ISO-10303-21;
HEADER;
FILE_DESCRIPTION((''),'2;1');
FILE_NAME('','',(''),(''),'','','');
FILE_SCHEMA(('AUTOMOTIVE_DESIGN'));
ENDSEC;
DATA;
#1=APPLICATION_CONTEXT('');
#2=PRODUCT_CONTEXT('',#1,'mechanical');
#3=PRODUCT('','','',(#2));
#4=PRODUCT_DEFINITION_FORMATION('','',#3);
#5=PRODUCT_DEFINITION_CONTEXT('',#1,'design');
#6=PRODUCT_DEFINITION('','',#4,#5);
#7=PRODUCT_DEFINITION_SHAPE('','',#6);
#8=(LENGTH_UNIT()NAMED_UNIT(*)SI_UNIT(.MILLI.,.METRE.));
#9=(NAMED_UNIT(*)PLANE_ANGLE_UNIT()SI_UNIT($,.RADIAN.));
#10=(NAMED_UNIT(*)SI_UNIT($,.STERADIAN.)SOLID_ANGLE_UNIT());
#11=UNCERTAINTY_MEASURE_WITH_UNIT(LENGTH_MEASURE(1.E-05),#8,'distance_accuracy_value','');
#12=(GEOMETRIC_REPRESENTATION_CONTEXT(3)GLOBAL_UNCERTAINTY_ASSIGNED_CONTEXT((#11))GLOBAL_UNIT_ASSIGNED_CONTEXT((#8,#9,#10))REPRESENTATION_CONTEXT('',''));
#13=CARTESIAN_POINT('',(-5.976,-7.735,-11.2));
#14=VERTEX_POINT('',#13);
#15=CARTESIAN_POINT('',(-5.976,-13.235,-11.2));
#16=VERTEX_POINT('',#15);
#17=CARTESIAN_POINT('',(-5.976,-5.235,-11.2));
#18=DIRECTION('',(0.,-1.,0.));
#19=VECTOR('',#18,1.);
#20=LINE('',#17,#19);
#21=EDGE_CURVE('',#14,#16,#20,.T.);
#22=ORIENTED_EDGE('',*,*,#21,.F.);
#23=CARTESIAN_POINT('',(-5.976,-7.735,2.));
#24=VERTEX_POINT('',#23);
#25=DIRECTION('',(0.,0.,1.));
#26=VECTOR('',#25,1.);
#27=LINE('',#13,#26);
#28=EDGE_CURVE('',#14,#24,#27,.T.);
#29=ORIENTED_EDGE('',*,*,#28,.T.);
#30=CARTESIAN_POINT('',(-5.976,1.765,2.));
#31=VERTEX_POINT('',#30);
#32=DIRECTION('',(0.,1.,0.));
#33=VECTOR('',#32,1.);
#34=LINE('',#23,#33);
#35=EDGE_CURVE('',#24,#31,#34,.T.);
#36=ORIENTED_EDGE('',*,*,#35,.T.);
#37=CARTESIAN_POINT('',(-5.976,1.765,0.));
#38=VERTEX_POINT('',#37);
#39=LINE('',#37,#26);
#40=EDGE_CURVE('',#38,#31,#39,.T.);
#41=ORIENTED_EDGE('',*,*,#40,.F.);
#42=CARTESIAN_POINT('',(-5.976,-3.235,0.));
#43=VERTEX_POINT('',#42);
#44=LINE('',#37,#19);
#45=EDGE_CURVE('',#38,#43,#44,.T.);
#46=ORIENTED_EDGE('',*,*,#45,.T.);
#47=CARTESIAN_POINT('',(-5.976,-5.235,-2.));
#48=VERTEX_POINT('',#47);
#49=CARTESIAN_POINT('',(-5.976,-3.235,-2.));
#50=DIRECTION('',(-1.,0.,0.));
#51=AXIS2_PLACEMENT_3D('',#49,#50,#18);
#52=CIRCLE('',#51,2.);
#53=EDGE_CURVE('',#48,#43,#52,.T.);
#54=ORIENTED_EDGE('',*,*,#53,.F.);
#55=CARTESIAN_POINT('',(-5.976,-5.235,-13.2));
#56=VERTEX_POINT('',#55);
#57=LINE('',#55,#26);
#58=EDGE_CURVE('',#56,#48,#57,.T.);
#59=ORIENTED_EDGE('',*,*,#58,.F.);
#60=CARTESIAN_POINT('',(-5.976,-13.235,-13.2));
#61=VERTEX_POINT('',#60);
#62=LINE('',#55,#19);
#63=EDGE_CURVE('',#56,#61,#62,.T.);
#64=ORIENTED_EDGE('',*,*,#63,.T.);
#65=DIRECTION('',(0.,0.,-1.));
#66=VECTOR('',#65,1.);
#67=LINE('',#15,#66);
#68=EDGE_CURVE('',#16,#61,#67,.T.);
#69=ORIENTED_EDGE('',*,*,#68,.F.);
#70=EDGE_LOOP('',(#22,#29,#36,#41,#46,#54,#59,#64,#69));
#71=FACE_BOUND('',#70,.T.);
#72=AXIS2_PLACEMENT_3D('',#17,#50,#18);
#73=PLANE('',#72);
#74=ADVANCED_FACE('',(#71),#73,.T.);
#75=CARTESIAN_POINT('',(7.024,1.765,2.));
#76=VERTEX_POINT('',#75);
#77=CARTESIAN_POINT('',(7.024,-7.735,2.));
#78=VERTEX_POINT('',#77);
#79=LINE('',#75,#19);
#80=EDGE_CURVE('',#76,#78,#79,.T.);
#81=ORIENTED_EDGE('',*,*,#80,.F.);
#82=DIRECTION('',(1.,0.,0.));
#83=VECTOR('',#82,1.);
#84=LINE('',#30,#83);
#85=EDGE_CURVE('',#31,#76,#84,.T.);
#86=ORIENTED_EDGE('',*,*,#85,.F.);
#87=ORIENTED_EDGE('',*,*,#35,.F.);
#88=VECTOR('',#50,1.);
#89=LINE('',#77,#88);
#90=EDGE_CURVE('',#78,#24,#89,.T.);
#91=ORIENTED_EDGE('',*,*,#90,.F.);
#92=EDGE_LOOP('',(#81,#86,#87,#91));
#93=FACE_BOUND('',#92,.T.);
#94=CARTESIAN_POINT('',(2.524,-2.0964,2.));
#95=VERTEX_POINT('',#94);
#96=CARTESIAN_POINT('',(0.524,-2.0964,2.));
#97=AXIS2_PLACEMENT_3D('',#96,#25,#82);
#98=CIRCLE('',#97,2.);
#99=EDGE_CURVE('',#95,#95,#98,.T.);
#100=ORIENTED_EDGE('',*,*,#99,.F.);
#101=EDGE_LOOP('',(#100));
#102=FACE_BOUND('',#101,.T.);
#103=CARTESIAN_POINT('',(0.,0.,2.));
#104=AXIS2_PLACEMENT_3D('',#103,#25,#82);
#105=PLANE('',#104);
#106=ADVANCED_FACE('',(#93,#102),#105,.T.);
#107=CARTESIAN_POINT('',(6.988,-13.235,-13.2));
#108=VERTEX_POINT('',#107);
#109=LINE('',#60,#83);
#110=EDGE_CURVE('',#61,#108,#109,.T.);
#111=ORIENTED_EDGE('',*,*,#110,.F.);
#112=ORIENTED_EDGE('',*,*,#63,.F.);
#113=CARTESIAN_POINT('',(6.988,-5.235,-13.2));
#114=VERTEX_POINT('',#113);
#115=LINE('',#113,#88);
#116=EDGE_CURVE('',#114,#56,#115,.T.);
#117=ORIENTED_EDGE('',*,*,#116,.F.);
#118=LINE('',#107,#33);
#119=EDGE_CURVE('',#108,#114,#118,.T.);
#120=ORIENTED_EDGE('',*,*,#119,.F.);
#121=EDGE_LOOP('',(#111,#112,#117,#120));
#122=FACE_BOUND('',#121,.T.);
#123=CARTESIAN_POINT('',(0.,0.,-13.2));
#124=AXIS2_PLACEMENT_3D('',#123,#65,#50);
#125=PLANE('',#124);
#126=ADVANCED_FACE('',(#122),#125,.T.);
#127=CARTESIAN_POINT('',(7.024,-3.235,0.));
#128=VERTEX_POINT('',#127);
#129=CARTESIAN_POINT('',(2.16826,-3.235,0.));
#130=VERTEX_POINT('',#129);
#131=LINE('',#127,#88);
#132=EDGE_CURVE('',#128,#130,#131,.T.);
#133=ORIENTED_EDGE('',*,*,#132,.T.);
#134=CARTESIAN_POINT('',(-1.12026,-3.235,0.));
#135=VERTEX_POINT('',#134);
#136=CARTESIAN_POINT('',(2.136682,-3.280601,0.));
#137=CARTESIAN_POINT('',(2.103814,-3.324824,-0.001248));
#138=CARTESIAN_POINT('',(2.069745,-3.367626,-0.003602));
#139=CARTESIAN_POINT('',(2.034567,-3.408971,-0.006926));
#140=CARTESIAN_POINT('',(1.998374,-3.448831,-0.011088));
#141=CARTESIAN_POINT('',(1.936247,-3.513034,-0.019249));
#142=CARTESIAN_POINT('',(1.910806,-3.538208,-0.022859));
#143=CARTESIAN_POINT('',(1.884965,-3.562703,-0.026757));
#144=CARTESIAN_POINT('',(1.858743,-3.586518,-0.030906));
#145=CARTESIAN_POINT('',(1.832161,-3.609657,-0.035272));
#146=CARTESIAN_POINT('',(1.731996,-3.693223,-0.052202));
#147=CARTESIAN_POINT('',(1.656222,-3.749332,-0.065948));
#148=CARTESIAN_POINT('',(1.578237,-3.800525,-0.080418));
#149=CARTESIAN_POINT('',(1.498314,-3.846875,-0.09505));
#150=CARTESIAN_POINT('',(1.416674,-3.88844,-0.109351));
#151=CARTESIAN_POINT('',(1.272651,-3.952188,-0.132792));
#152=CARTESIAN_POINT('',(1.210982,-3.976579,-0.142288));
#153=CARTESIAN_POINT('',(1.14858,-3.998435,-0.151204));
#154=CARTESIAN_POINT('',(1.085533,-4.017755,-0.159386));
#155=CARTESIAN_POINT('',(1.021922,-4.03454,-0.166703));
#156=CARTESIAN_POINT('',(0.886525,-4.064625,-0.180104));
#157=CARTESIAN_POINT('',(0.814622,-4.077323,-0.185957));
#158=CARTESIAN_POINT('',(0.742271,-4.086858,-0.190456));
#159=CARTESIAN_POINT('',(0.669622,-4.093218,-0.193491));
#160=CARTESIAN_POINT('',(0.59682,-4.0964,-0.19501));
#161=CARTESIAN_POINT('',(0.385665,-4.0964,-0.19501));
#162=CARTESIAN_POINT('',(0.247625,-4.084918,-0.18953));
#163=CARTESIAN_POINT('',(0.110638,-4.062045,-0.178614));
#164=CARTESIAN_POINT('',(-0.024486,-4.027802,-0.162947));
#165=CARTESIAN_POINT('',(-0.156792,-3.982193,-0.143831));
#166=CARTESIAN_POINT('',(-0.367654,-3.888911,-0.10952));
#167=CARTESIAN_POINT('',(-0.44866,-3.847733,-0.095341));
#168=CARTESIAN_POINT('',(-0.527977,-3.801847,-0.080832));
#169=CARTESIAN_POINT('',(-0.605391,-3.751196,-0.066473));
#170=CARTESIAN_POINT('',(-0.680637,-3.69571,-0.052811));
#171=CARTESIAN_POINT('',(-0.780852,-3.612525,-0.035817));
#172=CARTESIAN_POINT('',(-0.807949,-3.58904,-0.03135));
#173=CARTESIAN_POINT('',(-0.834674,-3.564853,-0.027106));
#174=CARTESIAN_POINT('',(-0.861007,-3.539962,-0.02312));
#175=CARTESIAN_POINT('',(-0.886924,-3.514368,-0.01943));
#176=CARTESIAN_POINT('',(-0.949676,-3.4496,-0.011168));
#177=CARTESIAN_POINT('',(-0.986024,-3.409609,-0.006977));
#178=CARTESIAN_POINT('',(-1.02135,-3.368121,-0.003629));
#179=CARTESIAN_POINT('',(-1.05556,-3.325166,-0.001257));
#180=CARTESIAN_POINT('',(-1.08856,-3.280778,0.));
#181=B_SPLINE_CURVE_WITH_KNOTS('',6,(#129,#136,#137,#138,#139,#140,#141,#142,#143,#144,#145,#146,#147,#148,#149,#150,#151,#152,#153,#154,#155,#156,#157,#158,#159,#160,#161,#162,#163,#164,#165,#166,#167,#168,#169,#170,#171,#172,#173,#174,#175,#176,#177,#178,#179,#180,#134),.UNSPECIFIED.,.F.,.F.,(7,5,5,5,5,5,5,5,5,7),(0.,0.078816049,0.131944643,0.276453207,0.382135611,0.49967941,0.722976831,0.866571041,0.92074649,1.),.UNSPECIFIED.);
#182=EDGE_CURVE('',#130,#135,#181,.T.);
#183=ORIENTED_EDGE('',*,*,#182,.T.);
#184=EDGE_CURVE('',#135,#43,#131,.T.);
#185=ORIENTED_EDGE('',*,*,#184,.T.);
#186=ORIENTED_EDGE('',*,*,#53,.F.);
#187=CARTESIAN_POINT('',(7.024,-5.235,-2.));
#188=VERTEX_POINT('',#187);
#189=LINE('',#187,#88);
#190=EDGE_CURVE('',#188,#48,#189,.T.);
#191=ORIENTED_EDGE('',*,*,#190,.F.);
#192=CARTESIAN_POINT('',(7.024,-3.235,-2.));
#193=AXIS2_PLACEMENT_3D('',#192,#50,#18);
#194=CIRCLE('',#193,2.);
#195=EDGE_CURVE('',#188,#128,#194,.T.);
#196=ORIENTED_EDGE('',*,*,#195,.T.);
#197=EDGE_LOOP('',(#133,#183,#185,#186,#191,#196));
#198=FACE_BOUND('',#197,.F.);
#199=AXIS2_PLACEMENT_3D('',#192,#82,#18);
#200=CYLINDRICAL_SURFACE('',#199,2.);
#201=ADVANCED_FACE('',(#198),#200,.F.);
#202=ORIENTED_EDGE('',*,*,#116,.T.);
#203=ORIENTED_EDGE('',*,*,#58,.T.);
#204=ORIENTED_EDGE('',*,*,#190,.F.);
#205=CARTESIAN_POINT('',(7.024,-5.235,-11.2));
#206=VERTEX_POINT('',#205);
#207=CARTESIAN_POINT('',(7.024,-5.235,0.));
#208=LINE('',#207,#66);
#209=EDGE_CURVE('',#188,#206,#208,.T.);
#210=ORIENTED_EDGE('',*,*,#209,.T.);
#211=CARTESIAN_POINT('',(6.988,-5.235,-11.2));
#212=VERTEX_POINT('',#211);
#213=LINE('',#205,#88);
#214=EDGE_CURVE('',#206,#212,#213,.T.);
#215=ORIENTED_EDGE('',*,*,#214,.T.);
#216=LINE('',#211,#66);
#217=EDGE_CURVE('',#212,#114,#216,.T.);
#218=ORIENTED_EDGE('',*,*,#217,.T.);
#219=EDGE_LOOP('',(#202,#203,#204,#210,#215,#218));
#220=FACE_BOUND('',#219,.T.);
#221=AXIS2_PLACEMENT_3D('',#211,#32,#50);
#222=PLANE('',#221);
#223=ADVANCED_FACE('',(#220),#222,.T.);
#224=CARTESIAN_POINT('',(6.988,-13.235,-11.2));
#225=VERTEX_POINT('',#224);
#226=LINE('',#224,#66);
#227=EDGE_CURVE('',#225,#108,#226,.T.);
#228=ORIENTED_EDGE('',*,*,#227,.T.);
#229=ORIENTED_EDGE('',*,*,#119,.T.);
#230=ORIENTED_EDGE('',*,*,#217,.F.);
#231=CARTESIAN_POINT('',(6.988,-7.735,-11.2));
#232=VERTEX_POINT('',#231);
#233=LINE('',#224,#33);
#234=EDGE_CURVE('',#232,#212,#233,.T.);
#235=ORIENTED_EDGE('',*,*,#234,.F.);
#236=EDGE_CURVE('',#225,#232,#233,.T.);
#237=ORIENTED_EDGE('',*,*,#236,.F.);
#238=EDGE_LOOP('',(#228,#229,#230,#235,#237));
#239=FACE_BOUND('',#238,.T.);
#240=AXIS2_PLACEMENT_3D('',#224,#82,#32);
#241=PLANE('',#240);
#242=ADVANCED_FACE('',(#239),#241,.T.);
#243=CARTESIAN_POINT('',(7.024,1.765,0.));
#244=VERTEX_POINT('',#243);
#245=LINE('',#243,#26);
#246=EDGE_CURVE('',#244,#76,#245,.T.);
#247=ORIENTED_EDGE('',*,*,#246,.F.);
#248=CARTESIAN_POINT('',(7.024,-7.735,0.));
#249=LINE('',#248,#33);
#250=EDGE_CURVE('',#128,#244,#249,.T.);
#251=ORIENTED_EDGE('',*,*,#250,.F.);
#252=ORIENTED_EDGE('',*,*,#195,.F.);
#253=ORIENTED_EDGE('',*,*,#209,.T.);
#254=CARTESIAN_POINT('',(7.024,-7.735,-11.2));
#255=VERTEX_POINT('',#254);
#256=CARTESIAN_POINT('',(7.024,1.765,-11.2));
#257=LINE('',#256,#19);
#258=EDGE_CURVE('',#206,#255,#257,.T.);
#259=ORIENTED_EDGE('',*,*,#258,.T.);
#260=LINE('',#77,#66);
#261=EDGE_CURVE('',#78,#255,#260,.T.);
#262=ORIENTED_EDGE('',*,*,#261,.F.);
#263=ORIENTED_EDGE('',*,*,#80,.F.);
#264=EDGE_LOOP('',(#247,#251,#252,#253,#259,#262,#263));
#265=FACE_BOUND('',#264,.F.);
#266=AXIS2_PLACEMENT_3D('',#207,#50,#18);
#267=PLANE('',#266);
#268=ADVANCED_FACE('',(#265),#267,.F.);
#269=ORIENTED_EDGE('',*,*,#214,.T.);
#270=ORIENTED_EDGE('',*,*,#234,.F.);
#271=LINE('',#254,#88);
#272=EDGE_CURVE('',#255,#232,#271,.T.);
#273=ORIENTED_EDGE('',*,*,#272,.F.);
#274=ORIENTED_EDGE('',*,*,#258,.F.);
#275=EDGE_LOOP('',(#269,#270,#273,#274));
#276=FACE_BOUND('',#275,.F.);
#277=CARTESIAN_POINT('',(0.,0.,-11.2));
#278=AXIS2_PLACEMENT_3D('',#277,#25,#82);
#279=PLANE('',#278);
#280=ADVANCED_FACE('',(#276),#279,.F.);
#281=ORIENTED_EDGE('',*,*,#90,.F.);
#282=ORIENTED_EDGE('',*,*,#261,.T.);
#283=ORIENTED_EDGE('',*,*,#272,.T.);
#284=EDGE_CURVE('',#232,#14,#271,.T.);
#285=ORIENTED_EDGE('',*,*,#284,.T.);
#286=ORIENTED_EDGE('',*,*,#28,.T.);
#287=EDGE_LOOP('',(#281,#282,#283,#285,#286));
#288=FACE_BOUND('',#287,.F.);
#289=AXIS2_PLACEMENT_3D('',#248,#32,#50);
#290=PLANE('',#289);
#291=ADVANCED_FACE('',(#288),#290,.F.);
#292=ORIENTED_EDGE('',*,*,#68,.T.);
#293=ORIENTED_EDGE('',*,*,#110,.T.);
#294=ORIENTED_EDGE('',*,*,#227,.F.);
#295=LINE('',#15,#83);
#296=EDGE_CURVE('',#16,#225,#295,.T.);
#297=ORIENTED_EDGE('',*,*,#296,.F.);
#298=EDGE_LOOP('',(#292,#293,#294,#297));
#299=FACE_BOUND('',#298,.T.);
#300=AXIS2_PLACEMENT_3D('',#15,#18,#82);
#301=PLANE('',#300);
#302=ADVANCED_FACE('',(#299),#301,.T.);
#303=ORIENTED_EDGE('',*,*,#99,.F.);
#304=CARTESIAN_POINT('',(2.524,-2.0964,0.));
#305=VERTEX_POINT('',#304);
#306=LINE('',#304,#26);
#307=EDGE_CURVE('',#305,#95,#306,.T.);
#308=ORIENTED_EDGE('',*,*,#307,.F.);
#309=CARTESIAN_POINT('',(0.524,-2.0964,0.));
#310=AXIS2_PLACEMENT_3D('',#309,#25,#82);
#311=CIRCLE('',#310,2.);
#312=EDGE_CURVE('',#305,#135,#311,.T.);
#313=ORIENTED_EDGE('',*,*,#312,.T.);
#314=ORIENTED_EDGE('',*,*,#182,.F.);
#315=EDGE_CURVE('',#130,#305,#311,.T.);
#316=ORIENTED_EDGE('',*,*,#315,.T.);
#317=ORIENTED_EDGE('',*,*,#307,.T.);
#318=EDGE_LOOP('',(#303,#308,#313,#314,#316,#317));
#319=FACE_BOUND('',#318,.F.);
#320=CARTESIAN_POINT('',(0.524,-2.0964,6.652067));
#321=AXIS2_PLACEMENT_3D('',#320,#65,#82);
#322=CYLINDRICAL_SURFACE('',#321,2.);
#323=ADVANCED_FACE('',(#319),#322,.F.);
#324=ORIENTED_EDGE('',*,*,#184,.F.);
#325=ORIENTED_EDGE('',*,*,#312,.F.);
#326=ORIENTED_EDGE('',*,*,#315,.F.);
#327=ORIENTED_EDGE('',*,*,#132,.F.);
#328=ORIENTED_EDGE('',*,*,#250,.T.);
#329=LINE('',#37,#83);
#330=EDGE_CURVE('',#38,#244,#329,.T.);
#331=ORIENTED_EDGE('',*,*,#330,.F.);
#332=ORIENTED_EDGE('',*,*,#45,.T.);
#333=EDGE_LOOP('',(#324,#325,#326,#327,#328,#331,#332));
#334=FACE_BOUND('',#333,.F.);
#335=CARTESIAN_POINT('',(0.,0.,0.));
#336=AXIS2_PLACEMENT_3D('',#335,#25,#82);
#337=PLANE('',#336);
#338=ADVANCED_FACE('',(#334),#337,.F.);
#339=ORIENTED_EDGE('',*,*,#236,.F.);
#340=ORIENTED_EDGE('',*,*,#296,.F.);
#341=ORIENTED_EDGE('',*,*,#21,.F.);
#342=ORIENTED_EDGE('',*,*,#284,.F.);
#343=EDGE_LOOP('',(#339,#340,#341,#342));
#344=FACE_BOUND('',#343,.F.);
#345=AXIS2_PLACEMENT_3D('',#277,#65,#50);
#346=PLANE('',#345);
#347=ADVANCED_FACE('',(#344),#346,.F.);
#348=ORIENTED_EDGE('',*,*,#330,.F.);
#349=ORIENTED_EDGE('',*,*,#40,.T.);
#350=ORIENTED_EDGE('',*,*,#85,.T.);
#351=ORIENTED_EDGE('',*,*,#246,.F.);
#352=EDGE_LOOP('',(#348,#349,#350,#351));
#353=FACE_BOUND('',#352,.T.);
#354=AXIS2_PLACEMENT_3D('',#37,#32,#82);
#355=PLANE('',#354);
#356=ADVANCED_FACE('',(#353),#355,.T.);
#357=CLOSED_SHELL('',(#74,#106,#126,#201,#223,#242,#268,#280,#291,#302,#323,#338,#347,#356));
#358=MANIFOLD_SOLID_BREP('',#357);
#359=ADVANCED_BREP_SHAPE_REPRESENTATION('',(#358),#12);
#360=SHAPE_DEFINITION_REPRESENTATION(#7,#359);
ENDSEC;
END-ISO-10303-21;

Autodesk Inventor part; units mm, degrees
ref_plane "YZ Plane" through (0, 0, 0) normal (1, 0, 0) x (0, 1, 0)
ref_plane "XZ Plane" through (0, 0, 0) normal (0, 1, 0) x (-1, 0, 0)
ref_plane "XY Plane" through (0, 0, 0) normal (0, 0, 1) x (1, 0, 0)
sketch "Sketch1" plane through (0, 0, 0) normal (0, 0, 1) x (1, 0, 0)
  line L0 (-5.976, 1.765) -> (7.024, 1.765)
  line L1 (7.024, 1.765) -> (7.024, -7.735)
  line L2 (7.024, -7.735) -> (-5.976, -7.735)
  line L3 (-5.976, -7.735) -> (-5.976, 1.765)
  line L4 (-5.976, -7.735) -> (7.024, -7.735)
  line L5 (7.024, -7.735) -> (7.024, -5.235)
  line L6 (7.024, -5.235) -> (-5.976, -5.235)
  line L7 (-5.976, -5.235) -> (-5.976, -7.735)
  circle A0 centre (0.524, -2.0964) radius 2
  point P0 (0, 0)
  dimension "d0" = 9.5
  dimension "d1" = 13
  dimension "d2" = 2.5
  dimension "d3" = 4
  dimension "d4" = 6.5
  dimension "d5" = 3.8614
extrude "Extrusion1" add sketch "Sketch1" along normal blind 2
extrude "Extrusion2" add sketch "Sketch1" against normal blind 11.2 contours L6 L1 L2 L3
sketch "Sketch2" plane through (0, 0, -11.2) normal (0, 0, -1) x (-1, 0, 0)
  line L0 (-6.988, -5.235) -> (5.976, -5.235)
  line L1 (5.976, -5.235) -> (5.976, -13.235)
  line L2 (5.976, -13.235) -> (-6.988, -13.235)
  line L3 (-6.988, -13.235) -> (-6.988, -5.235)
  line L4 (5.976, -7.735) -> (5.976, -5.235) projected
  line L5 (5.976, -5.235) -> (-7.024, -5.235) projected
  point P0 (0, 0)
  dimension "d10" = 0
  dimension "d11" = 8
  dimension "d12" = 0
extrude "Extrusion3" add sketch "Sketch2" along normal blind 2
fillet "Fillet1" radius 2 1 edges at (0.524, -5.235, 0)
properties part number "ethernet bracket support"
